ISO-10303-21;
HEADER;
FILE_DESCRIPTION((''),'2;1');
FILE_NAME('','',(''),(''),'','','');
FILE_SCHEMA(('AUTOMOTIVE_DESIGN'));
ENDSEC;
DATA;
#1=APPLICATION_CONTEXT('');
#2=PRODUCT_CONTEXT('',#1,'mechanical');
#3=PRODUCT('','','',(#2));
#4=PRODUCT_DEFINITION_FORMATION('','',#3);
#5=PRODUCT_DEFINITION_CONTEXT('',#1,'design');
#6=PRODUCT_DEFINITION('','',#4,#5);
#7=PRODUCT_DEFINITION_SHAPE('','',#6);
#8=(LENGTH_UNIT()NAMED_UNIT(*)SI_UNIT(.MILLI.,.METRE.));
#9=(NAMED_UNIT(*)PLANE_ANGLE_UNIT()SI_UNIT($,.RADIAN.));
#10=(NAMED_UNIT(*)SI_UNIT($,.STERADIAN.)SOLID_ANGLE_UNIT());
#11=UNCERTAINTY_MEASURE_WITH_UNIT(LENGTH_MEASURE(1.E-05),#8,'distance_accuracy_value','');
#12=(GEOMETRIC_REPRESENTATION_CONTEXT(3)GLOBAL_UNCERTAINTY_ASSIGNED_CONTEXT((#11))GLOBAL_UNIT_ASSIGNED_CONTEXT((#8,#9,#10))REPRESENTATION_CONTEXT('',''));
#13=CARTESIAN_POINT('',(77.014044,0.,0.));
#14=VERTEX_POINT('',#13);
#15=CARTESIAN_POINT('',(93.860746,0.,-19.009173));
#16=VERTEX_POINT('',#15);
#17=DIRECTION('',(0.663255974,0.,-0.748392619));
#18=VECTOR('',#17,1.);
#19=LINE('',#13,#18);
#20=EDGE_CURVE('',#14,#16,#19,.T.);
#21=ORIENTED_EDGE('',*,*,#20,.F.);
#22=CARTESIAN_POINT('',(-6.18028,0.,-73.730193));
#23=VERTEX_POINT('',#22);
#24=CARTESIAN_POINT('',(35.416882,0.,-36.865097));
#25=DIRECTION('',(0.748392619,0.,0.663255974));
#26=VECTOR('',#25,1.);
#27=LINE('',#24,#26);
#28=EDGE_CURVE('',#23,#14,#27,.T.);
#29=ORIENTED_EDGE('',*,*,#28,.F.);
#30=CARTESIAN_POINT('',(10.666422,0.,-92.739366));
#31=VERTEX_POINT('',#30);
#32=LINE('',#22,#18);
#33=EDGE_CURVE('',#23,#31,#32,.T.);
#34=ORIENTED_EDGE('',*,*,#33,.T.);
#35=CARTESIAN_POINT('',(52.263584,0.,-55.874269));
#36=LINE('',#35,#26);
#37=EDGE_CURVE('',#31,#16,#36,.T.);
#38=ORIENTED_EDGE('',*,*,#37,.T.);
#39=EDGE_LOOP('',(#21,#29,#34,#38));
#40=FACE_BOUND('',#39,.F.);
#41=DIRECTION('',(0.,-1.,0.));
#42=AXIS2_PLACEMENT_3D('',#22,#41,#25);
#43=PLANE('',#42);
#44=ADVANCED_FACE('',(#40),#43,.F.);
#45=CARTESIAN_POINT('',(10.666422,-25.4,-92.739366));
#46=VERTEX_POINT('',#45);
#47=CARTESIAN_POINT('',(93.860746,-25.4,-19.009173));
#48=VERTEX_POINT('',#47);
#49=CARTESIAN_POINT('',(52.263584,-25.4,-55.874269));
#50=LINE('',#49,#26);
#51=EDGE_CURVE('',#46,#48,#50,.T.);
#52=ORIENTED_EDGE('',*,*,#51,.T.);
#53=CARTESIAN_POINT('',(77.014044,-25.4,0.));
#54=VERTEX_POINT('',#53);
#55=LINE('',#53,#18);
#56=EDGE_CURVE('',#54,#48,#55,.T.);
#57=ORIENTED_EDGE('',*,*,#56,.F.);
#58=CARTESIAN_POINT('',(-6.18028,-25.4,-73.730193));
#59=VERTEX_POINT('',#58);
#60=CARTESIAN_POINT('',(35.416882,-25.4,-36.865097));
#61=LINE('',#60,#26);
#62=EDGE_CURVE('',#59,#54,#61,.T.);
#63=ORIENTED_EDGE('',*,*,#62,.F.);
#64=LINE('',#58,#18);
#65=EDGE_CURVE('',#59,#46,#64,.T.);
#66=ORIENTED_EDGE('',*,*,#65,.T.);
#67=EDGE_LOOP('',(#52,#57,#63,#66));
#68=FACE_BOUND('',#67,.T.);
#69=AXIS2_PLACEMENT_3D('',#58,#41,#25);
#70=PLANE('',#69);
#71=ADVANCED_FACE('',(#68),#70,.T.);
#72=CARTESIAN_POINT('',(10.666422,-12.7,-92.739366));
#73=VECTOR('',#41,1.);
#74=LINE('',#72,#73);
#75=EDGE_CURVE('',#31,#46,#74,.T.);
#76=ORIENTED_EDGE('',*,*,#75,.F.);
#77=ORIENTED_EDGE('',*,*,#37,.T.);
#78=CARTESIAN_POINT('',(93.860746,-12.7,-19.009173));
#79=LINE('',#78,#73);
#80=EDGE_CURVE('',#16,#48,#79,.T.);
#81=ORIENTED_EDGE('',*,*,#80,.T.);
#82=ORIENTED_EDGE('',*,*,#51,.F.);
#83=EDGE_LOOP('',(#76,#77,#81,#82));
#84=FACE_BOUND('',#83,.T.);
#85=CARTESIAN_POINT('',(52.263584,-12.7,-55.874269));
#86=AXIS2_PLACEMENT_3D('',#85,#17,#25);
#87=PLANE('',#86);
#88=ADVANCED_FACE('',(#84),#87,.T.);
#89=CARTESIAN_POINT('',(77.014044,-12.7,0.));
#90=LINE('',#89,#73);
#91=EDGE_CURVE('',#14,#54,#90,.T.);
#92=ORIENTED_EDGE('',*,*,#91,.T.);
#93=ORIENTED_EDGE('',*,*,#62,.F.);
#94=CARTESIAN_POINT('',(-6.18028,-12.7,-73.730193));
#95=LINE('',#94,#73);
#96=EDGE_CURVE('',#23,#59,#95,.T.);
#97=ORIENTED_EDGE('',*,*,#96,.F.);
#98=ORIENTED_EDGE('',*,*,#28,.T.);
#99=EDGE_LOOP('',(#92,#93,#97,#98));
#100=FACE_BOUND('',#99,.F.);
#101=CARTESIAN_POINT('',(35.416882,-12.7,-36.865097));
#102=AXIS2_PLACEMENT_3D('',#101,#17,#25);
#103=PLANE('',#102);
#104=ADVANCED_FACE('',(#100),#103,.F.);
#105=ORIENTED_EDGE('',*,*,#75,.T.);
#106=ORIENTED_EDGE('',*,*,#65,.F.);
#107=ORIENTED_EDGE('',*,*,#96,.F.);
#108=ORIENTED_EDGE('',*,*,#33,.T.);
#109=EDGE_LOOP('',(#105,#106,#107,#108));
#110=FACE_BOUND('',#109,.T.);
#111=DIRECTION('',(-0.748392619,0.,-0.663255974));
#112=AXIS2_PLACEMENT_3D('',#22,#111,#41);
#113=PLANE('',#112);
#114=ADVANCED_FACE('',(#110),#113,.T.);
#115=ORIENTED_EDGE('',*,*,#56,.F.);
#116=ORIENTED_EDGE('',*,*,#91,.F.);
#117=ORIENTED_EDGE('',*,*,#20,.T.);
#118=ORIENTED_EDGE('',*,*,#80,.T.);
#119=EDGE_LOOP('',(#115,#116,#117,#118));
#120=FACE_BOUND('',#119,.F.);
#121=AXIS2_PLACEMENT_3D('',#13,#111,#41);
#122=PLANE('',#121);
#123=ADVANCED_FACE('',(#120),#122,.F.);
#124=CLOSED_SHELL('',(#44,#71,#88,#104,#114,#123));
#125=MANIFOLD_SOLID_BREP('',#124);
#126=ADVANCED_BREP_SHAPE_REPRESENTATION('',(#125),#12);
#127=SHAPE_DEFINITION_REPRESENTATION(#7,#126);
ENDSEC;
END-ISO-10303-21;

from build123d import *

# Parameters (mm, degrees)
F1_E2_W  = 111.164008953
F1_E2_H  = 25.4
F2_DEPTH = 25.4


with BuildPart() as f2:
    # F1_E2 (on explicit) → F2 (new body)
    with BuildSketch(Plane(origin=(-6.1802798882, 0, -73.7301930785), x_dir=(0.7483926191, 0, 0.6632559744), z_dir=(0.6632559744, 0, -0.7483926191))):
        with Locations((55.5820044765, 12.7)):
            Rectangle(F1_E2_W, F1_E2_H)
    extrude(amount=F2_DEPTH)


solid = f2.part
